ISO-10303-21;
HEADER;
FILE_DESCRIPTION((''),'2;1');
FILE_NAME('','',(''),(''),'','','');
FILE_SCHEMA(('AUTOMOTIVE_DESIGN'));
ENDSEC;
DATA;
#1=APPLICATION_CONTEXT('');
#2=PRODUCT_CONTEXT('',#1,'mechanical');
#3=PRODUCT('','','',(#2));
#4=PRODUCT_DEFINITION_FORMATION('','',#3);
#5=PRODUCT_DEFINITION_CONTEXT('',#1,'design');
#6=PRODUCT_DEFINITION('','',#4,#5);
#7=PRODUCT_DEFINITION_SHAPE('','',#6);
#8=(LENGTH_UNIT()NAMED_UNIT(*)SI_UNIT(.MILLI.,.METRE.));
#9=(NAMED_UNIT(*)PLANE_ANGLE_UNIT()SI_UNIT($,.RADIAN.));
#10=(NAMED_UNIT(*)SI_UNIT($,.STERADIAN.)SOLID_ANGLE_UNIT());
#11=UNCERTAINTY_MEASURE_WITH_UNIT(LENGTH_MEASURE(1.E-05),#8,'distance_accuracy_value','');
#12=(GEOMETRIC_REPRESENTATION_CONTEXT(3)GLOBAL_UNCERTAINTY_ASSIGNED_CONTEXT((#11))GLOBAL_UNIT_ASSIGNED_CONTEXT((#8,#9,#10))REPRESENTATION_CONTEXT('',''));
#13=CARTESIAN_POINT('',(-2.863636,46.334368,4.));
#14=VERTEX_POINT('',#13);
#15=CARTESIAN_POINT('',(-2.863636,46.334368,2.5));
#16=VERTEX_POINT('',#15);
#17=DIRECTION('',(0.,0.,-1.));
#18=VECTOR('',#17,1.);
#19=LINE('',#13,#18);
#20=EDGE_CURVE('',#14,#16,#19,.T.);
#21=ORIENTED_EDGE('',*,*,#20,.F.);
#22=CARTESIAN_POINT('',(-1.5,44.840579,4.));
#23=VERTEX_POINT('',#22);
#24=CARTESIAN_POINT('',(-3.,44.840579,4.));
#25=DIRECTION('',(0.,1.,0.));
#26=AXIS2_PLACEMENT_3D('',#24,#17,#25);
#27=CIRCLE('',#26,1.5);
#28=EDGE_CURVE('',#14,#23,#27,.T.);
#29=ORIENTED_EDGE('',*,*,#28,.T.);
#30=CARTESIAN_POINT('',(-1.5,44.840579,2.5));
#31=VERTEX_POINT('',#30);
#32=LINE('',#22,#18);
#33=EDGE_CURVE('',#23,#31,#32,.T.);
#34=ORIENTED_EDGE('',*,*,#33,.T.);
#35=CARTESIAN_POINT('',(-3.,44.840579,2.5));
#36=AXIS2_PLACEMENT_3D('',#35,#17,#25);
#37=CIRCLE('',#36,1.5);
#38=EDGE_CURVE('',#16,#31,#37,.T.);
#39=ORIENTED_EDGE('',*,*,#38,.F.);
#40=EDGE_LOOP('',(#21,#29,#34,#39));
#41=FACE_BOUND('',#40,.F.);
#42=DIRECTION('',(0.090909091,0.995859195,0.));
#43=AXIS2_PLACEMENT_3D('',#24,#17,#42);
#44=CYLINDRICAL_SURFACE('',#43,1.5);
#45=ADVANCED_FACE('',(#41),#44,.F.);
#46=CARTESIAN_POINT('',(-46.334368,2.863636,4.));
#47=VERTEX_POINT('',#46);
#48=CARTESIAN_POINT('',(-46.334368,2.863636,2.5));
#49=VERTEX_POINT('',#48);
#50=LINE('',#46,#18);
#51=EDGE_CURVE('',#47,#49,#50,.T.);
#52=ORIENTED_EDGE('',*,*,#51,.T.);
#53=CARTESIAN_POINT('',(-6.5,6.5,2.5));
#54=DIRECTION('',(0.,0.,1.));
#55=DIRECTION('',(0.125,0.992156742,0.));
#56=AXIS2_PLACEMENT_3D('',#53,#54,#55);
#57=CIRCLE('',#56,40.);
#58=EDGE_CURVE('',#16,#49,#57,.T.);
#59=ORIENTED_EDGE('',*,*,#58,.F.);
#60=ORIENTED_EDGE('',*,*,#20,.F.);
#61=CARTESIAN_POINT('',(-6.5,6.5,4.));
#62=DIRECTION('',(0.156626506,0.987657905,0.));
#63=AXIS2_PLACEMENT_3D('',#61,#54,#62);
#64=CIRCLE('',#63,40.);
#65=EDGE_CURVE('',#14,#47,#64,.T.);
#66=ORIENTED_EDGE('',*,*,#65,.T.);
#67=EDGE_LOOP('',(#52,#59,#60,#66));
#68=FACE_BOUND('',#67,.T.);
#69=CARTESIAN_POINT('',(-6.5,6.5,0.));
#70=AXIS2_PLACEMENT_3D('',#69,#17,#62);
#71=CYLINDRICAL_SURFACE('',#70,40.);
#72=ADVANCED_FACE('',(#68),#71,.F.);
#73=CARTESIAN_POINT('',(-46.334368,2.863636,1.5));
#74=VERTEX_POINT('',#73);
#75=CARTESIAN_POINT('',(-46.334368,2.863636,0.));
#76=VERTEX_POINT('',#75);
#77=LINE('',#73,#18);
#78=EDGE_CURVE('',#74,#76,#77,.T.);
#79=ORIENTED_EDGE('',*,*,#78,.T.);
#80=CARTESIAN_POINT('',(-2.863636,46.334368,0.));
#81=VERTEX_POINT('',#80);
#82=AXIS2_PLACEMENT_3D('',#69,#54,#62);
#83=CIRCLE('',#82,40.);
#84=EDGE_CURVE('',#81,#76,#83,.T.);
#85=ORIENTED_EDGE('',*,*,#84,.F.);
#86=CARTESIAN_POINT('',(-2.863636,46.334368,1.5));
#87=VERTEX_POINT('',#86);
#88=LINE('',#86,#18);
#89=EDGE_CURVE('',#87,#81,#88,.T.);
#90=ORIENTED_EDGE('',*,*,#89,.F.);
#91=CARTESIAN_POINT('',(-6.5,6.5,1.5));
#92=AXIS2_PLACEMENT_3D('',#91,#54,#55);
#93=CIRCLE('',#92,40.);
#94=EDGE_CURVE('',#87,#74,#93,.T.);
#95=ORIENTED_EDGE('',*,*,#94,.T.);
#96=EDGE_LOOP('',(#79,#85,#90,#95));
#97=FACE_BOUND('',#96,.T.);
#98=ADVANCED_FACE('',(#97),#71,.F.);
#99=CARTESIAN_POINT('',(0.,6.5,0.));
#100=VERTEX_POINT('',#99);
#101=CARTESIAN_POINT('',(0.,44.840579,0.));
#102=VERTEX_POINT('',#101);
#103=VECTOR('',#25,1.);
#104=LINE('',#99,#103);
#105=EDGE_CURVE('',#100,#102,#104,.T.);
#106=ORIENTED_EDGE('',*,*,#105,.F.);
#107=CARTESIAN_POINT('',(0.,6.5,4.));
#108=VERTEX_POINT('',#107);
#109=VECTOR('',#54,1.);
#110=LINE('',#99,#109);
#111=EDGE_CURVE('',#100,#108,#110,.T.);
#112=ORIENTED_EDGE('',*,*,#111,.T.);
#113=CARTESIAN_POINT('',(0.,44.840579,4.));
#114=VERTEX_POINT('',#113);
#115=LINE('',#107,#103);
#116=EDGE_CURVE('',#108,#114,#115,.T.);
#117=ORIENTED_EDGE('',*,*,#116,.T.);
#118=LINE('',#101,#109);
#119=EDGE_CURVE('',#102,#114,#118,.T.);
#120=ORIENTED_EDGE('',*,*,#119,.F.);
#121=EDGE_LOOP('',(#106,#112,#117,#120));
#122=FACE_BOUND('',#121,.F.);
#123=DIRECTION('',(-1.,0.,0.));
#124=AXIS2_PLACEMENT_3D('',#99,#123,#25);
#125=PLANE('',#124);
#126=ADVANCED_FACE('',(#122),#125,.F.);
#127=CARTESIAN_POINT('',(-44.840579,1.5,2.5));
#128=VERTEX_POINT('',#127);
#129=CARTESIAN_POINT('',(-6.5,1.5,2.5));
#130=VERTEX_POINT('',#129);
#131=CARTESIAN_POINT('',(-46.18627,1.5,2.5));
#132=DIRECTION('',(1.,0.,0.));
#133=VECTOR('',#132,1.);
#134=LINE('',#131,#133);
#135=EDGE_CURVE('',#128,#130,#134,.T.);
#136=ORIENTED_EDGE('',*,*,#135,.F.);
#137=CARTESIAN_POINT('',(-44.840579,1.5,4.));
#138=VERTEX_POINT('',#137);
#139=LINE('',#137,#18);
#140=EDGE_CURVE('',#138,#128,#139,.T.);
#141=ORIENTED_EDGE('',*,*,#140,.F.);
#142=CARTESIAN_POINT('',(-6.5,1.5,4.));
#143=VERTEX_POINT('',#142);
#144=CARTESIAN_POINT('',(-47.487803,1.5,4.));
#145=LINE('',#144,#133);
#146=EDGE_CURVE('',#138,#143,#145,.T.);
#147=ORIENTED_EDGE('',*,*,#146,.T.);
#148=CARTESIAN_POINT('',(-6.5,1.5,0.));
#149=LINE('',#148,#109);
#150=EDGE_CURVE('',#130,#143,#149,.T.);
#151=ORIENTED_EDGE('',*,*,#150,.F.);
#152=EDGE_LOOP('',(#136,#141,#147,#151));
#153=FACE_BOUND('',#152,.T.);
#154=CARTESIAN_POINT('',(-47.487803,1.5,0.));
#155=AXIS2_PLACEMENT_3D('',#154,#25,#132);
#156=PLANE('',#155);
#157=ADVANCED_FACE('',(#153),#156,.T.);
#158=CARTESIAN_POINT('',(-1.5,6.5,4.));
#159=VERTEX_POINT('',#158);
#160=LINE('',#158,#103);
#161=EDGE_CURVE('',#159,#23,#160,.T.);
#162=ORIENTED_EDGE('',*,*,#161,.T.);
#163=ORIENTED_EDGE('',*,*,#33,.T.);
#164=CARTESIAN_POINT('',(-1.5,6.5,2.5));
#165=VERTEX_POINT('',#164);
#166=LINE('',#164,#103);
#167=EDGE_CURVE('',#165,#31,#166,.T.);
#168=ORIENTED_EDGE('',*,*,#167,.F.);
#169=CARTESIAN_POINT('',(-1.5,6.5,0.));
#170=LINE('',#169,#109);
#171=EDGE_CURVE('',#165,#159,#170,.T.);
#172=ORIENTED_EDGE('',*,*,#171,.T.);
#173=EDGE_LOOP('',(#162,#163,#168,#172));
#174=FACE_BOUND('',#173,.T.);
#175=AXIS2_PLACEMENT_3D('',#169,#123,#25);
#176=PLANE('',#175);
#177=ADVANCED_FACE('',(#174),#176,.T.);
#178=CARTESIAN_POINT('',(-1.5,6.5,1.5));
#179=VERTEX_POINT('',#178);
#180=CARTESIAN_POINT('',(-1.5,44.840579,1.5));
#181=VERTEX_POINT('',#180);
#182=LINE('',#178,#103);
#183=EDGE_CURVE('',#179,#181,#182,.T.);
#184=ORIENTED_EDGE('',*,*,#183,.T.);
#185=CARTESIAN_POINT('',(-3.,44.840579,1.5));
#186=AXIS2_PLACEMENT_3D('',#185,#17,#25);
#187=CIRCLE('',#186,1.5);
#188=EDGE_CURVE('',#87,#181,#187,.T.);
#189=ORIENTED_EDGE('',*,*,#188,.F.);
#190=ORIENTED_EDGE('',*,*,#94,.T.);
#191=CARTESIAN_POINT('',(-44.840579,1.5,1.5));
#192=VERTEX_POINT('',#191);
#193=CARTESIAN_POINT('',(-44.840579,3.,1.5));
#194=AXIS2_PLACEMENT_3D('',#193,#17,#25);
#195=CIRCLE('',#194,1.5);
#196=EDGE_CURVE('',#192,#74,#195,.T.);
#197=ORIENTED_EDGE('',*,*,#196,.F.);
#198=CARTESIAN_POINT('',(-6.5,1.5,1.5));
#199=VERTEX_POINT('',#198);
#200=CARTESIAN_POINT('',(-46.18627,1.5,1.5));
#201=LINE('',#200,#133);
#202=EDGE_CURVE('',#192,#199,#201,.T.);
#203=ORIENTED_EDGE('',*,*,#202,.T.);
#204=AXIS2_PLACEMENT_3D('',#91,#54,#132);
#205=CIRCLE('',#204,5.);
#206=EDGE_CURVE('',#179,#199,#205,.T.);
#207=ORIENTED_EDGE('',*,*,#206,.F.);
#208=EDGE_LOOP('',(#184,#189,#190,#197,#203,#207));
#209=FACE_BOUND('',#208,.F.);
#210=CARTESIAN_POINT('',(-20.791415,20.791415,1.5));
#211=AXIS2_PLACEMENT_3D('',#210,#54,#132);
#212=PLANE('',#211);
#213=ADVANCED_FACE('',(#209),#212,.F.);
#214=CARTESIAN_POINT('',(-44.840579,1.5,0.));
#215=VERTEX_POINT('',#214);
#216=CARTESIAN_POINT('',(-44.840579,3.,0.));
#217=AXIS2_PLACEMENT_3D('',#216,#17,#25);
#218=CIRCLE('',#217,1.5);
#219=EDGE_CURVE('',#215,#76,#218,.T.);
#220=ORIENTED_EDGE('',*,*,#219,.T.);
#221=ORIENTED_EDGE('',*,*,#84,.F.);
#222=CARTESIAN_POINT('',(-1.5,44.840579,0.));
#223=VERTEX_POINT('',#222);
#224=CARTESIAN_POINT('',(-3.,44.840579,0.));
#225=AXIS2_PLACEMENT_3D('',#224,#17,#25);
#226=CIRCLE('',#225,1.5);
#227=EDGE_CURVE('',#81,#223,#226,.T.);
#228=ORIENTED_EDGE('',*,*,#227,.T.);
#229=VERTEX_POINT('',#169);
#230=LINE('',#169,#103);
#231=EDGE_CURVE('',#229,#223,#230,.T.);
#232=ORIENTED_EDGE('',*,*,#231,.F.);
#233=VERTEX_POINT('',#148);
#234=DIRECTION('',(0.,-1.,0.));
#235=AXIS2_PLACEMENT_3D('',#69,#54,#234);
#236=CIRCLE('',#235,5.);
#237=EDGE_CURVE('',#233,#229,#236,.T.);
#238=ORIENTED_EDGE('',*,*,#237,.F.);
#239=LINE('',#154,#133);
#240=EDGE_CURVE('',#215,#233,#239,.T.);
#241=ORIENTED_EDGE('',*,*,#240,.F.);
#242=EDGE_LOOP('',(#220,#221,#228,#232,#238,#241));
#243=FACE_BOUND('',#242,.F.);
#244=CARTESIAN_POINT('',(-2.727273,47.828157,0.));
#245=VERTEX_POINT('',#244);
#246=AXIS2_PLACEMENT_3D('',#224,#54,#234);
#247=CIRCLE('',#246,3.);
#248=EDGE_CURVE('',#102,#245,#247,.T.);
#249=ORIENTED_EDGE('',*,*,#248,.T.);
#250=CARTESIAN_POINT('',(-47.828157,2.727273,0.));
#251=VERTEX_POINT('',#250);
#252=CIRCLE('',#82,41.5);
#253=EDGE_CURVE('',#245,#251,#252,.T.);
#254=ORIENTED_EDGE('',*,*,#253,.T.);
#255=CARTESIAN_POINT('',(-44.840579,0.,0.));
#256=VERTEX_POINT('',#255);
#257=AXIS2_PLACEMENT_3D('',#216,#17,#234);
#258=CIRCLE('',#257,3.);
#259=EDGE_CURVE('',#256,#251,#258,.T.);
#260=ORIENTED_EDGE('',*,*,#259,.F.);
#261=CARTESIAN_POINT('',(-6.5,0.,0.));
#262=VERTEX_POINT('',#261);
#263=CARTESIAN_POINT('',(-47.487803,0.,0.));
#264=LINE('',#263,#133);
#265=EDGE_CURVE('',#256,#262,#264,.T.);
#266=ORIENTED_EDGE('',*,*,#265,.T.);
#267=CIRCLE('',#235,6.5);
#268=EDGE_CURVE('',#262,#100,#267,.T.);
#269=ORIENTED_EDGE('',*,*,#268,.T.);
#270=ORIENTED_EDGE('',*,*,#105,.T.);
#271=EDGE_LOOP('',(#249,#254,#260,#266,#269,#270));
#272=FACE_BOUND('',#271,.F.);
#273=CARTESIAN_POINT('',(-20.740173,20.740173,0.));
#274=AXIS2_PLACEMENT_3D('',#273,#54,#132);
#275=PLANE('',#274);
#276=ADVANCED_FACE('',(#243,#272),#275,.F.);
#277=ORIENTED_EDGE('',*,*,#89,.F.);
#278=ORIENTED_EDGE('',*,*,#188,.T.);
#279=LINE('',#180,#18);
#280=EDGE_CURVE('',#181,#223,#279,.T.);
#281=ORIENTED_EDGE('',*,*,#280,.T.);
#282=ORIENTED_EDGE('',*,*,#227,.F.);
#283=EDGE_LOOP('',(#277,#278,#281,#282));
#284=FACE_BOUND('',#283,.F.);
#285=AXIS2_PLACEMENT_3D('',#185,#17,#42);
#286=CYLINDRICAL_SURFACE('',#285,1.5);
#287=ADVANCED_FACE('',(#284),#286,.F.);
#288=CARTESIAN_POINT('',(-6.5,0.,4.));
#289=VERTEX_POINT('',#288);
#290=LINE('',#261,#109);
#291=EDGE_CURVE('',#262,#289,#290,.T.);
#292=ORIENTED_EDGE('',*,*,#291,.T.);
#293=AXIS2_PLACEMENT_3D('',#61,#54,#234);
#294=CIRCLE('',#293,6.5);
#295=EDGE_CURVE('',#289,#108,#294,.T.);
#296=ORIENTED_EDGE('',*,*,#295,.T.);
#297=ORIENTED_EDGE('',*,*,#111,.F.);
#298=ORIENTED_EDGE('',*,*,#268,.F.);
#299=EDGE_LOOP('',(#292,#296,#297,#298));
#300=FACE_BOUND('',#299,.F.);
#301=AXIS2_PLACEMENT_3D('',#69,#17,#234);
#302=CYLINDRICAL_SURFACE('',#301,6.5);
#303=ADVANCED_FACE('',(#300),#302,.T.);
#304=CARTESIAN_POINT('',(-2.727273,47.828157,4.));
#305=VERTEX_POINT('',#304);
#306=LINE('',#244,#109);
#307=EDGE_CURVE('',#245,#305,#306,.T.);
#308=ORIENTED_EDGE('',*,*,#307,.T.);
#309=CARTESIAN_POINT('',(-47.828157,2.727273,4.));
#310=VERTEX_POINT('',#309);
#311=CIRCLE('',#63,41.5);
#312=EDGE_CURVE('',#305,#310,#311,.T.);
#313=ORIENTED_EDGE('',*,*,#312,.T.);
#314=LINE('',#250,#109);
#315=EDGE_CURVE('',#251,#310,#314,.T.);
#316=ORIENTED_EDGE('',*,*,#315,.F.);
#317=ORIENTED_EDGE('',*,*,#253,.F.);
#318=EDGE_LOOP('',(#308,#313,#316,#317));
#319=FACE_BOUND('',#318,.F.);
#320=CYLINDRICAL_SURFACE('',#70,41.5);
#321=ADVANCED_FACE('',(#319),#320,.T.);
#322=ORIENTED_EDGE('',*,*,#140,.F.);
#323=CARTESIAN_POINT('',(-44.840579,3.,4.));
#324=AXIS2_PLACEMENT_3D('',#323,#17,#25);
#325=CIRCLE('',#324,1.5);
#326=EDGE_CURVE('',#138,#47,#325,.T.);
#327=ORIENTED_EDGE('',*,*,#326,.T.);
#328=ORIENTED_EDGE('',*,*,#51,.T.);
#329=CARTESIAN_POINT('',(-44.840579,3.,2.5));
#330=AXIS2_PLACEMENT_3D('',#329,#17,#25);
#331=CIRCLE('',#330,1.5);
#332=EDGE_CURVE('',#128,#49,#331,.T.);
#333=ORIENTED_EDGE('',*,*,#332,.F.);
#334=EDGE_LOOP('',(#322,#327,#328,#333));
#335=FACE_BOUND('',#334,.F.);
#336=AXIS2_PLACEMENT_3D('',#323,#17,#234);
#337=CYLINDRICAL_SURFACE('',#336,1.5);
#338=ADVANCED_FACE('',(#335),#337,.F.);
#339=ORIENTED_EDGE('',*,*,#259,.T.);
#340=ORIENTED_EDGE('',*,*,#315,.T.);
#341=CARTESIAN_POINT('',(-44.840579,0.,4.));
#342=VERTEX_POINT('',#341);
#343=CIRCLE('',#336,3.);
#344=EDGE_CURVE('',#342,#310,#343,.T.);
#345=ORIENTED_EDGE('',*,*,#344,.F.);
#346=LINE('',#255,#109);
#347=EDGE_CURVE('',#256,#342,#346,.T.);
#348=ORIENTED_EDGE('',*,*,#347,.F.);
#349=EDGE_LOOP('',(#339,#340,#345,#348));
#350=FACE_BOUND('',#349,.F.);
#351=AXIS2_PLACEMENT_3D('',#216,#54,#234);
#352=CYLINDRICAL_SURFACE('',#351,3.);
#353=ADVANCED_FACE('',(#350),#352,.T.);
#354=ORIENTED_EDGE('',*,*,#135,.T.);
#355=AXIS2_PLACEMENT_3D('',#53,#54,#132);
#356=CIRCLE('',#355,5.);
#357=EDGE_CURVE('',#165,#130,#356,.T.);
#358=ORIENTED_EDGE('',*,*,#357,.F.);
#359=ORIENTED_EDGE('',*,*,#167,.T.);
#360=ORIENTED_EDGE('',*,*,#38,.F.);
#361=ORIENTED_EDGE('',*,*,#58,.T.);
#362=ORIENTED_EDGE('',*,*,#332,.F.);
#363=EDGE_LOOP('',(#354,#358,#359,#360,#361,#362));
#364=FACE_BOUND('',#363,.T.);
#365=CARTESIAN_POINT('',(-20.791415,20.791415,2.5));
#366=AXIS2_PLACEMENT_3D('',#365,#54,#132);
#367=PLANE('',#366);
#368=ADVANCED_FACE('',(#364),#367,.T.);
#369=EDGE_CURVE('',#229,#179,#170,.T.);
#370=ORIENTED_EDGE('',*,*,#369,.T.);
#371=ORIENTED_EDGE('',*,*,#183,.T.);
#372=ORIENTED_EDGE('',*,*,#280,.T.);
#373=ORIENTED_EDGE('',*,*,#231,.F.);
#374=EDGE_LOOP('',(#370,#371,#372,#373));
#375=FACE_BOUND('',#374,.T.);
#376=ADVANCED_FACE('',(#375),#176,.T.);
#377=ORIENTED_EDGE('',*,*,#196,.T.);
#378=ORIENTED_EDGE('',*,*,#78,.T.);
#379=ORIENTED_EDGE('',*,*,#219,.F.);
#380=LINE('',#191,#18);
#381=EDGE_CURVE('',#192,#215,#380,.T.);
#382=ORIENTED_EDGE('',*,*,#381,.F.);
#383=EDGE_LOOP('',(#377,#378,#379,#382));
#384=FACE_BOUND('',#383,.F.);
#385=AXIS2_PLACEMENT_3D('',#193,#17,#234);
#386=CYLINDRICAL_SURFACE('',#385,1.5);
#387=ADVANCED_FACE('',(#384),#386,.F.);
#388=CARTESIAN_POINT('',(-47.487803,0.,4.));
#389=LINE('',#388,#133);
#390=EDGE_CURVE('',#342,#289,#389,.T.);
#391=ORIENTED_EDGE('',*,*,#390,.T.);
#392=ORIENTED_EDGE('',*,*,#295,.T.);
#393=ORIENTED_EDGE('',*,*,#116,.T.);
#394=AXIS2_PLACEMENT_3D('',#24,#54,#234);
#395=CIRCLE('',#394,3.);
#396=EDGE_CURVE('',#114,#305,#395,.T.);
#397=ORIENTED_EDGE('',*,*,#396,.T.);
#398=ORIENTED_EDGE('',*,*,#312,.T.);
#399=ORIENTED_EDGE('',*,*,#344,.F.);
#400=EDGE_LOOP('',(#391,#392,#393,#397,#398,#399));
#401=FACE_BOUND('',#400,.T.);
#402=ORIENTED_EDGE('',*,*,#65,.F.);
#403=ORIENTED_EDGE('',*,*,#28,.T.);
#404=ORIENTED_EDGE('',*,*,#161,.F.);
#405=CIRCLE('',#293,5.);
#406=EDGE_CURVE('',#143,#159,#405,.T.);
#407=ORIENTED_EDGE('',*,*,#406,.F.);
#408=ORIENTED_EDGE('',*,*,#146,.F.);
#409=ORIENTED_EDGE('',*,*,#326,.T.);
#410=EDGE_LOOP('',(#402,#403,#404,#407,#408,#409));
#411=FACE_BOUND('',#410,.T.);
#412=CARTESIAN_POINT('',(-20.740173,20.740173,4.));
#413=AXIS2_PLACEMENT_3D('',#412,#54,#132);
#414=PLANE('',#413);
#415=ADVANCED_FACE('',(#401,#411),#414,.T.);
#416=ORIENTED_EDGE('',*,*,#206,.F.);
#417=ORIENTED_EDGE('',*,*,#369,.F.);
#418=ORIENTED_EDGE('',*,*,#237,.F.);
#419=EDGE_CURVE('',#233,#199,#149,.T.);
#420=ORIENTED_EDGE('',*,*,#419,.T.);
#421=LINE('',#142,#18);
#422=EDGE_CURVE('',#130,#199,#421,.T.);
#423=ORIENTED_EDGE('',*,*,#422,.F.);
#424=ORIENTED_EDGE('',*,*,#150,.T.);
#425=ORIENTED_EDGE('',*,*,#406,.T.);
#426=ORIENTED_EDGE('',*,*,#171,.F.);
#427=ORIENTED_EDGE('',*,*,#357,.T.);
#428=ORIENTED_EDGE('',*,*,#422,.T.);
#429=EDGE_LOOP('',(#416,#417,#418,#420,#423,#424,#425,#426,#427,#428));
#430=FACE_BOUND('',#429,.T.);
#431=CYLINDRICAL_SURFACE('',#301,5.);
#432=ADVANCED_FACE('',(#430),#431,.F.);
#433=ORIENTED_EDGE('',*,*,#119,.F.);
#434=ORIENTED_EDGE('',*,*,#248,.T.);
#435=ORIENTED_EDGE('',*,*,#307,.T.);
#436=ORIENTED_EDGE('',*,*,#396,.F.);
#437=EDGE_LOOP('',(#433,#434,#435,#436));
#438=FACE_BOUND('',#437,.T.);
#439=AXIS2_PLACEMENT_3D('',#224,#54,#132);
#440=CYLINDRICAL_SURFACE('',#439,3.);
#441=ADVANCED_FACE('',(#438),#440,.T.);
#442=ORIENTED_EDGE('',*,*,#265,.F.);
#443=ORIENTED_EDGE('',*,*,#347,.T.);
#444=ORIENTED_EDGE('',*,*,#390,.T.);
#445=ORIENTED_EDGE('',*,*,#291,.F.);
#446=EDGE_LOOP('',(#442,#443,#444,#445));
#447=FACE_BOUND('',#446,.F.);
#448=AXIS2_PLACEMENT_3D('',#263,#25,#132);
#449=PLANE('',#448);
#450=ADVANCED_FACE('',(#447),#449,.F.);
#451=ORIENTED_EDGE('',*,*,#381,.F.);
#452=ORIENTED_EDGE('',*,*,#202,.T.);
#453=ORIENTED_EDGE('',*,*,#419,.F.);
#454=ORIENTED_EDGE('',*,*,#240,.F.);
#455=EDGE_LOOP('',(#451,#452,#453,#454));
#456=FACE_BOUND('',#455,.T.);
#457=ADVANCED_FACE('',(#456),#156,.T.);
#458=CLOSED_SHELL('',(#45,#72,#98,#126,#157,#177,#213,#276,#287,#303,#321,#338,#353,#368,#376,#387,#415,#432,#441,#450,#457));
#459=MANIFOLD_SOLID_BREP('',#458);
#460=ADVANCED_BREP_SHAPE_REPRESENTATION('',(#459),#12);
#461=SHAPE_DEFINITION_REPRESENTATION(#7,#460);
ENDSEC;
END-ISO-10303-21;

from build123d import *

# Parameters (mm, degrees)
F1_DEPTH = 4
F2_T     = -1.5
F5_DEPTH = 1
F6_R     = 3
F7_R     = 1.5
F9_DEPTH = 25


with BuildPart() as f1:
    # F0 (on Top) → F1 (new body)
    with BuildSketch(Plane.XY):
        with BuildLine():
            ThreePointArc((-6.5, 0), (-1.9038059223, 1.9038059223), (0, 6.5))
            Line((0, 6.5), (0, 47.4878030638))
            ThreePointArc((0, 47.4878030638), (-35.8449314192, 35.8449314192), (-47.4878030638, 0))
            Line((-47.4878030638, 0), (-13, 0))
            Line((-13, 0), (-6.5, 0))
        make_face()
    extrude(amount=F1_DEPTH)

    # F2
    f2_openings = [f1.faces().sort_by_distance(p)[0] for p in [
        (-21.274509, 21.274509, 4),
        (-21.274509, 21.274509, 0),
    ]]
    offset(amount=F2_T, openings=f2_openings)

    # F4 (on offset) → F5 (join)
    with BuildSketch(Plane.XY.offset(1.5)):
        with BuildLine():
            Line((-46.186269666, 1.5), (-6.5, 1.5))
            ThreePointArc((-6.5, 1.5), (-2.9644660941, 2.9644660941), (-1.5, 6.5))
            Line((-1.5, 6.5), (-1.5, 46.186269666))
            ThreePointArc((-1.5, 46.186269666), (-34.7842712475, 34.7842712475), (-46.186269666, 1.5))
        make_face()
    extrude(amount=F5_DEPTH)

    # F6
    f6_edges = [f1.edges().sort_by_distance(p)[0] for p in [
        (0, 47.487803, 2),
        (-47.487803, 0, 2),
    ]]
    fillet(f6_edges, radius=F6_R)

    # F7
    f7_edges = [f1.edges().sort_by_distance(p)[0] for p in [
        (-1.5, 46.18627, 0.75),
        (-46.18627, 1.5, 0.75),
        (-46.18627, 1.5, 3.25),
        (-1.5, 46.18627, 3.25),
    ]]
    fillet(f7_edges, radius=F7_R)

    # F8 (on face) → F9 (cut)
    with BuildSketch(Plane.XY.offset(4)):
        with BuildLine():
            ThreePointArc((-6.5, 1.5), (-2.9644660941, 2.9644660941), (-1.5, 6.5))
            ThreePointArc((-1.5, 6.5), (-10.0355339059, 10.0355339059), (-6.5, 1.5))
        make_face()
    extrude(amount=-F9_DEPTH, mode=Mode.SUBTRACT)


solid = f1.part
